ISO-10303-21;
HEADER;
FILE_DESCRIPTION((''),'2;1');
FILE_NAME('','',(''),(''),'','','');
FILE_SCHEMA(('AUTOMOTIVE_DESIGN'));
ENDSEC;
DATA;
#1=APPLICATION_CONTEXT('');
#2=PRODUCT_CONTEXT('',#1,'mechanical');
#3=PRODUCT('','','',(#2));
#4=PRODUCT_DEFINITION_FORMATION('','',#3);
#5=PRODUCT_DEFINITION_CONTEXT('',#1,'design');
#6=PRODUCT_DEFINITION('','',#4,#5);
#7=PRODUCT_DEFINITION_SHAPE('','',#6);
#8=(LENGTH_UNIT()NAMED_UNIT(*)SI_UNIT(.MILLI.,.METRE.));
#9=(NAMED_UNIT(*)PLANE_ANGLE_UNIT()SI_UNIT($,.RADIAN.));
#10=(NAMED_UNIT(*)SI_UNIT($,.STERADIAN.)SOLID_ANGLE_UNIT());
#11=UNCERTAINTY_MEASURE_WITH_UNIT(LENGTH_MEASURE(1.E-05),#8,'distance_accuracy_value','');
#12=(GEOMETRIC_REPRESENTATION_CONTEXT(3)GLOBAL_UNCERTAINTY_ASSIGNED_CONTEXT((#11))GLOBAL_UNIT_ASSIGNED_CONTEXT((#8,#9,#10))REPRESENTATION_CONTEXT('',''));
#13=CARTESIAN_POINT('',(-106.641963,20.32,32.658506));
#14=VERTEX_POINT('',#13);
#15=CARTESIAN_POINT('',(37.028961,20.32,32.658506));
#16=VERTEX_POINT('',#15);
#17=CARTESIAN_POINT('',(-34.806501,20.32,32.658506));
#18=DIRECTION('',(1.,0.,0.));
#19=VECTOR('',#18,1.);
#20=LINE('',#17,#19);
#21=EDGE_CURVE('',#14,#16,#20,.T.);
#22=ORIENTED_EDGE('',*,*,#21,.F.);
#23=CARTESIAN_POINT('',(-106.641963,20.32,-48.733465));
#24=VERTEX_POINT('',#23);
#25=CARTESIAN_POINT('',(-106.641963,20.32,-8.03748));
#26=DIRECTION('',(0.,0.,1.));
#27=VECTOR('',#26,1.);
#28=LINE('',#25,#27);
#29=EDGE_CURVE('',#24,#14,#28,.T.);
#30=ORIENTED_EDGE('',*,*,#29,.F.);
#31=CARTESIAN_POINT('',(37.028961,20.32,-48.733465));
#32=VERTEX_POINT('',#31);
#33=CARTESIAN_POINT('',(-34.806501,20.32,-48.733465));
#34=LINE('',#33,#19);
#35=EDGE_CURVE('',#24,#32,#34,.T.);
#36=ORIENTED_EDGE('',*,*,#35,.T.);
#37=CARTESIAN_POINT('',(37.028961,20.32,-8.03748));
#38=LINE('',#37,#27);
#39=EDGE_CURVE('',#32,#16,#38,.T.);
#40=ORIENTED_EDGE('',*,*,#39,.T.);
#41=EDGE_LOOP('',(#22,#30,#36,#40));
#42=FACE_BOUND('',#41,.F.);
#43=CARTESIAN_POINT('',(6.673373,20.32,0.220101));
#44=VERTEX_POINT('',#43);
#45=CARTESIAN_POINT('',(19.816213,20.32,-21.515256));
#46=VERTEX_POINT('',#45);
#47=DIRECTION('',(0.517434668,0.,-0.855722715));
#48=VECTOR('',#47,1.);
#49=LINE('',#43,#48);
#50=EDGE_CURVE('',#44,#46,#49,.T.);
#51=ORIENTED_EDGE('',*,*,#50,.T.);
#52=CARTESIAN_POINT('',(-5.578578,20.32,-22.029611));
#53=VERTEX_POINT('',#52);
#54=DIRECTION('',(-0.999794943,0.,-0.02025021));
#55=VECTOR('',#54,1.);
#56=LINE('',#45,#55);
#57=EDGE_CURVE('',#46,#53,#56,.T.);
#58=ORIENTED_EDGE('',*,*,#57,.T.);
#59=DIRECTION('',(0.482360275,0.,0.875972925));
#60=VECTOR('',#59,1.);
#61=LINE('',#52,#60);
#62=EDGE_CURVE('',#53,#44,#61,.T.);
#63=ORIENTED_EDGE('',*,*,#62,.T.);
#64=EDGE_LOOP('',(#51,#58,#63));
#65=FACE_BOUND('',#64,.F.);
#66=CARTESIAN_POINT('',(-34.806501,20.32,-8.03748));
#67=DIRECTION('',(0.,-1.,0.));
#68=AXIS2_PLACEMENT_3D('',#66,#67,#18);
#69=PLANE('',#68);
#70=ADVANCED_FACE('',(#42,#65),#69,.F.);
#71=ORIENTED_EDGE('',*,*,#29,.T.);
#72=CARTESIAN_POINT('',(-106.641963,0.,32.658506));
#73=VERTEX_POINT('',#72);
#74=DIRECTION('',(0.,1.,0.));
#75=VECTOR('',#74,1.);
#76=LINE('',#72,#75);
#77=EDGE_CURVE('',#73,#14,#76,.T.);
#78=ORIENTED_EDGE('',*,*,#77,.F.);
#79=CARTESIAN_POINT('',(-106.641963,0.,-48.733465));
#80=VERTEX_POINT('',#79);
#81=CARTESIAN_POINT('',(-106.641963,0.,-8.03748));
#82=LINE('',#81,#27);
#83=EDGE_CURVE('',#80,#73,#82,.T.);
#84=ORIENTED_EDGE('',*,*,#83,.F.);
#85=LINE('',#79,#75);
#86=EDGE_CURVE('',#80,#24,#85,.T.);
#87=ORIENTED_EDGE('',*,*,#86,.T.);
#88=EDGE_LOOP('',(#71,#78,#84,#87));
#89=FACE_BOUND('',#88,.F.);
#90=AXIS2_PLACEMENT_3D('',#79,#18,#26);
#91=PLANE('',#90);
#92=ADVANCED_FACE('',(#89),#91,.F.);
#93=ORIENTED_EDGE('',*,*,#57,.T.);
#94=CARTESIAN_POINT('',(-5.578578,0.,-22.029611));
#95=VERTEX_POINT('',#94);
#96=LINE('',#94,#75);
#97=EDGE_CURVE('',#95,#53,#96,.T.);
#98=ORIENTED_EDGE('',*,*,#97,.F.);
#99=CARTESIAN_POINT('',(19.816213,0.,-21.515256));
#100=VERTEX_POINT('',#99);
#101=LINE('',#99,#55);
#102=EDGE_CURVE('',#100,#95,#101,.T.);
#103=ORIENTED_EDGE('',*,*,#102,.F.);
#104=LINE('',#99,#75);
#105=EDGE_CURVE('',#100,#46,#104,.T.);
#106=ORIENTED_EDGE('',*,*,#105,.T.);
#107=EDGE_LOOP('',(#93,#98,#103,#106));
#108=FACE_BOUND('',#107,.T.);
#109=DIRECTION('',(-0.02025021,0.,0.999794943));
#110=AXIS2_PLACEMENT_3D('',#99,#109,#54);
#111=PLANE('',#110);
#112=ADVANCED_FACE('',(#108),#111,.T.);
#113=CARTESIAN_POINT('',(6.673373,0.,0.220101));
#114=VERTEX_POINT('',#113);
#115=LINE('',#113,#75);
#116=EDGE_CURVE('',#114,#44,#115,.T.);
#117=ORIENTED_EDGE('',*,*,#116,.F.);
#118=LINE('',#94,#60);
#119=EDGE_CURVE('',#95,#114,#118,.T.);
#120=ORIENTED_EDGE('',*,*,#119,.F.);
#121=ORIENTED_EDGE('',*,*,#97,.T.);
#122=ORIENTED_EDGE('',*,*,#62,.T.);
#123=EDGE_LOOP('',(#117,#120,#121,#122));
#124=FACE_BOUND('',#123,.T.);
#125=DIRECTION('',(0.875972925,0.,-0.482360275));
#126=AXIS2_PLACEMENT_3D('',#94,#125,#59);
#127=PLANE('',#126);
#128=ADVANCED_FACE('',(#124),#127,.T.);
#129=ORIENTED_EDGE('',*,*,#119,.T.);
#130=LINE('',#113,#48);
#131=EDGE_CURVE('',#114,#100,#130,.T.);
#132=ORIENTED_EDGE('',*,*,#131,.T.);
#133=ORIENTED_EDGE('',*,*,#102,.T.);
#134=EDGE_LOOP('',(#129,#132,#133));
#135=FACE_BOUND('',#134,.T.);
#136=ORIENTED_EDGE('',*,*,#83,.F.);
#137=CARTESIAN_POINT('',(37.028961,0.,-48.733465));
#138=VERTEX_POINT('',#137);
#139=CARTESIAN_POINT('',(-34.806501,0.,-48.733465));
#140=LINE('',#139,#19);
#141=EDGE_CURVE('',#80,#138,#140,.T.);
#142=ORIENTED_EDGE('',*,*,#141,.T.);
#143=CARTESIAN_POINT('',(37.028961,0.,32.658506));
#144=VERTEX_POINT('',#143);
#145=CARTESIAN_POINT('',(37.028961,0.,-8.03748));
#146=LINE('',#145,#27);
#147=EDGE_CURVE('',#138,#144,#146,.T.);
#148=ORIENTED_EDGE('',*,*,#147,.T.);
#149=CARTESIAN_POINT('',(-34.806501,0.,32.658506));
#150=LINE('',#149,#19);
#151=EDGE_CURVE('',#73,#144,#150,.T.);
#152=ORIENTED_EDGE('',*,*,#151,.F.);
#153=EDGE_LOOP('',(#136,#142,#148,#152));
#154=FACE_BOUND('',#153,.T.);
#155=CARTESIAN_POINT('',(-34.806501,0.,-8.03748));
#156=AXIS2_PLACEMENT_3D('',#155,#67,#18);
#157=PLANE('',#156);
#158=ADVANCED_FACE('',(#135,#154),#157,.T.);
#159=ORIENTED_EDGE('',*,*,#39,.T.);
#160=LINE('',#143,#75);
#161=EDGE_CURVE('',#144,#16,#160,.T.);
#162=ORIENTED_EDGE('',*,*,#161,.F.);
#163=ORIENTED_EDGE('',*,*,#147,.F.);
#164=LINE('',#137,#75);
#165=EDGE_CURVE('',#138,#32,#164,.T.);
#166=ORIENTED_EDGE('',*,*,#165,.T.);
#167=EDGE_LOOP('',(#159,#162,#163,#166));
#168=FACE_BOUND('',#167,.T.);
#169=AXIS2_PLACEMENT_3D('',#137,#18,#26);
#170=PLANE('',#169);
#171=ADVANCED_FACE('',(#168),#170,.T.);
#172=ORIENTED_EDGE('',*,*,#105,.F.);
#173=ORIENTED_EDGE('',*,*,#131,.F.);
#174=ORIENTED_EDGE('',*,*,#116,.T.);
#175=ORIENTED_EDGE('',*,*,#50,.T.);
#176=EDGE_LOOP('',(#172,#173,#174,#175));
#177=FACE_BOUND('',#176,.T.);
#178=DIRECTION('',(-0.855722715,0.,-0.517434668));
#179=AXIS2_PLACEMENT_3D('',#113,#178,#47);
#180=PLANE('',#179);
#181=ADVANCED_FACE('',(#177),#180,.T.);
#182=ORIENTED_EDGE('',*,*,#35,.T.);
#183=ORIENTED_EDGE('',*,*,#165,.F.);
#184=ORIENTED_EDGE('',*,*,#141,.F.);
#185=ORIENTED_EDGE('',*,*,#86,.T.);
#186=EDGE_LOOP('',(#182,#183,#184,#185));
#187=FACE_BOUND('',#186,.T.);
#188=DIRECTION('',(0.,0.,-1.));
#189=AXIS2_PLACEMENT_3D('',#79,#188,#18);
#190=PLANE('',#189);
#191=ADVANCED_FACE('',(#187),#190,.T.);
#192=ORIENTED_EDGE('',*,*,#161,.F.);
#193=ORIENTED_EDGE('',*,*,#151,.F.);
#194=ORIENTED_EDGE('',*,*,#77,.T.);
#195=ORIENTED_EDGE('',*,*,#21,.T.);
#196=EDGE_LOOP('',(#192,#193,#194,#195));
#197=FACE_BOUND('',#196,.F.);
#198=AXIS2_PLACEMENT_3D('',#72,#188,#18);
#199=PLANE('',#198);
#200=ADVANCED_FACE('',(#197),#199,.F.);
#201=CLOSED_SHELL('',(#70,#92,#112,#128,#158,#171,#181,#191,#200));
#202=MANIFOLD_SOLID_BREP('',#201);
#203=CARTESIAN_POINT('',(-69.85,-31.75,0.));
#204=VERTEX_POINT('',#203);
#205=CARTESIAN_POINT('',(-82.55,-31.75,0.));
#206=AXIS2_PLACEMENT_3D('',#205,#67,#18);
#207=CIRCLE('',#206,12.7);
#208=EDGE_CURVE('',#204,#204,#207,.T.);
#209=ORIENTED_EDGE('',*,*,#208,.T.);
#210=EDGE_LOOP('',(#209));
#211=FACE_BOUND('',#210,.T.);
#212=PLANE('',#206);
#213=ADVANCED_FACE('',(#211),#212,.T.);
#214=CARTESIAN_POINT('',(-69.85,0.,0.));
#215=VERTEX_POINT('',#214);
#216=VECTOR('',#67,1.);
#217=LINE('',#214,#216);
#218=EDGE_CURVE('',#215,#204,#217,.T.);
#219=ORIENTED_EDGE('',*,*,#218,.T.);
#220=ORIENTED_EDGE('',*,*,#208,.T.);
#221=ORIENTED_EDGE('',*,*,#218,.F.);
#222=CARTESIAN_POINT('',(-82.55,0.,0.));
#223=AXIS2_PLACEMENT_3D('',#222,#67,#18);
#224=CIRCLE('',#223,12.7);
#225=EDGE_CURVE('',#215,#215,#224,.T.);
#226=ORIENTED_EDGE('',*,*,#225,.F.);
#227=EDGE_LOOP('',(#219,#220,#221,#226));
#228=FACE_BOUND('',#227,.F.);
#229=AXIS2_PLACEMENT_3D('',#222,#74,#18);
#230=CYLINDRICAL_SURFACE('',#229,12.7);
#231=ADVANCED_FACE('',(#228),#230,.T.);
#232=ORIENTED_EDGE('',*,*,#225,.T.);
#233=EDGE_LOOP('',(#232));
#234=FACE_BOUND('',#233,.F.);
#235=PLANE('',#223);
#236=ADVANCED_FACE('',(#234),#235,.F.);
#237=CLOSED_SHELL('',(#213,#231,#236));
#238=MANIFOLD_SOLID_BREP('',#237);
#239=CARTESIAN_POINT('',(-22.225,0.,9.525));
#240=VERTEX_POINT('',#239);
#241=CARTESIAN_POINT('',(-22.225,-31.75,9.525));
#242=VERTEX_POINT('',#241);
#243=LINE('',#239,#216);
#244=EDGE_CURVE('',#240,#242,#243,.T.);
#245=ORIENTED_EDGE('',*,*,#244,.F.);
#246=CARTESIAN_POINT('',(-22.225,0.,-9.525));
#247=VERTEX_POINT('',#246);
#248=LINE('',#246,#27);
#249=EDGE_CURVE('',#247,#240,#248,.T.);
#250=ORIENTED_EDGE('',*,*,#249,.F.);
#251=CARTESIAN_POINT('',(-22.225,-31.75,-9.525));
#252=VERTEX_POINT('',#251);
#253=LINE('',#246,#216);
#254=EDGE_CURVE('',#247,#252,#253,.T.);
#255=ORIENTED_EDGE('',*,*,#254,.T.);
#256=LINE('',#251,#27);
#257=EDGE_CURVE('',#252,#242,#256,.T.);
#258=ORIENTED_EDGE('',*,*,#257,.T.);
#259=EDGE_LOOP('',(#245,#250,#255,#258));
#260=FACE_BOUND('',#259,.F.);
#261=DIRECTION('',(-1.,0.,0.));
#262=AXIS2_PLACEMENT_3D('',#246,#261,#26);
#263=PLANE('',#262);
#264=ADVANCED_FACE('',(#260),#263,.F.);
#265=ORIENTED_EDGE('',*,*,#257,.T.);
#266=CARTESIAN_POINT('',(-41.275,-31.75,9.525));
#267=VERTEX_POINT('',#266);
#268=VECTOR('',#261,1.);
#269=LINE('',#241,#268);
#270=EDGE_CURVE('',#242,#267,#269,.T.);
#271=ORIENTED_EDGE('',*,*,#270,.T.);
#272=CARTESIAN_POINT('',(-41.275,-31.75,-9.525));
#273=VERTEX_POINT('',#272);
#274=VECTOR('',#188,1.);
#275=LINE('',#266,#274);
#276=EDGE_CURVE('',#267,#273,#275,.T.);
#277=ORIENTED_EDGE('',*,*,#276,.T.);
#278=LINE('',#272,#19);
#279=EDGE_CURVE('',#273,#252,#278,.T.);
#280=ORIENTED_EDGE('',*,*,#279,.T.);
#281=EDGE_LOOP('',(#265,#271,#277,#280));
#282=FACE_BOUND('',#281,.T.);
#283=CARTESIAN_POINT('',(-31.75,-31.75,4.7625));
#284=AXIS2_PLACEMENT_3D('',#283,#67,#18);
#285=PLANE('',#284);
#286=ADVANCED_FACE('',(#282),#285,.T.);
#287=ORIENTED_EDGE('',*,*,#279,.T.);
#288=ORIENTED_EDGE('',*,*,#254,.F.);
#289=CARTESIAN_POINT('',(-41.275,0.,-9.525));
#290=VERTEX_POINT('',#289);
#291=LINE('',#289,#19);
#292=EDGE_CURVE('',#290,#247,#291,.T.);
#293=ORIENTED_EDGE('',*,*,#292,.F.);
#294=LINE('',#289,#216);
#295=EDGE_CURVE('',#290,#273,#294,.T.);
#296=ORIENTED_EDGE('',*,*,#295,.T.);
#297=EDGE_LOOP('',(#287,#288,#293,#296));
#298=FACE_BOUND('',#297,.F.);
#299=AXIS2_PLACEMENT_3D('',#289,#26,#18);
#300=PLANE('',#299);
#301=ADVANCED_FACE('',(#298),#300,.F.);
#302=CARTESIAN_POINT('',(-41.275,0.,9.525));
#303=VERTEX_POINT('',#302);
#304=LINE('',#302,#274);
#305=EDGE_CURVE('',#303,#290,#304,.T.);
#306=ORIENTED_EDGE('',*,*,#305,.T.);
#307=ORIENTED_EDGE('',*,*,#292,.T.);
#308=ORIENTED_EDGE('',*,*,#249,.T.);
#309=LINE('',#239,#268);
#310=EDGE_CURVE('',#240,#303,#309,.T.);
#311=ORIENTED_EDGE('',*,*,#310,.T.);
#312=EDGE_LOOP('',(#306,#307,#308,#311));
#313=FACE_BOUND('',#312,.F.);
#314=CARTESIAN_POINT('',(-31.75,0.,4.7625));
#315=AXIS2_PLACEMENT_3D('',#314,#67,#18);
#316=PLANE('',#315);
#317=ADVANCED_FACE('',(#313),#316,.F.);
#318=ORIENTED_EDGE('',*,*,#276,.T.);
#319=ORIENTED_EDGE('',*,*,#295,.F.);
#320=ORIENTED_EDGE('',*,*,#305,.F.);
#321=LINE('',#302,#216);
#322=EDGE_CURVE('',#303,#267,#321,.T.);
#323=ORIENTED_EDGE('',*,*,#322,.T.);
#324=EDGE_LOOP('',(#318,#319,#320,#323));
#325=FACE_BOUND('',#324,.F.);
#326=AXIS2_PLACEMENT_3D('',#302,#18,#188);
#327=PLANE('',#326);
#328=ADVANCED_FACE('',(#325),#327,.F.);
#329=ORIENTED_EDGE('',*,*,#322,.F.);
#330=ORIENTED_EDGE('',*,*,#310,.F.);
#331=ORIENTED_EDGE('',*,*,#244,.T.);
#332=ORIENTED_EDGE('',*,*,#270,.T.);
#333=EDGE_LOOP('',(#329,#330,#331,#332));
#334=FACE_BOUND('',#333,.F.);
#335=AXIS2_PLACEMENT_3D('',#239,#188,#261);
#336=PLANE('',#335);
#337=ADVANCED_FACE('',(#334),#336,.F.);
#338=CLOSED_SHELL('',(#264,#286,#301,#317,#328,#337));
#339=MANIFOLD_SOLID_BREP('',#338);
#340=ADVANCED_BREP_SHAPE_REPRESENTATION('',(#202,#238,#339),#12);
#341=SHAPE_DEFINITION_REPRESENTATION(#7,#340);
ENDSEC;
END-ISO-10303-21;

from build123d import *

# Parameters (mm, degrees)
F0_R     = 12.7
F1_DEPTH = 31.75
F0_W     = 143.6709240079
F0_H     = 81.3919715583
F2_DEPTH = 20.32


# Not quite as in the source:
# - a feature names something its author has since deleted; it is built from what else it names


with BuildPart() as f1:
    # F0 (on Front) → F1 (new body)
    with BuildSketch(Plane.XZ):
        with Locations((-82.55, 0)):
            Circle(F0_R)
    extrude(amount=F1_DEPTH)


with BuildPart() as f1b:
    # F0 (on Front) → F1, piece 2 (new body)
    with BuildSketch(Plane.XZ):
        Polygon((-31.75, 0), (-22.225, 0), (-22.225, 9.525), (-41.275, 9.525), (-41.275, 0), align=None)
        Polygon((-22.225, -9.525), (-22.225, 0), (-31.75, 0), (-41.275, 0), (-41.275, -9.525), align=None)
    extrude(amount=F1_DEPTH)


with BuildPart() as f2:
    # F0 (on Front) → F2 (new body)
    with BuildSketch(Plane.XZ):
        with Locations((-34.8065011203, -8.0374795943)):
            Rectangle(F0_W, F0_H)
        Polygon((-5.5785784244, -22.0296108979), (6.6733725689, 0.2201013892), (19.8162131398, -21.5152555605), align=None, mode=Mode.SUBTRACT)
        with Locations((-82.55, 0)):
            Circle(F0_R, mode=Mode.SUBTRACT)
        Polygon((-22.225, 9.525), (-22.225, 0), (-22.225, -9.525), (-41.275, -9.525), (-41.275, 0), (-41.275, 9.525), align=None, mode=Mode.SUBTRACT)
        with Locations((-82.55, 0)):
            Circle(F0_R)
        Polygon((-22.225, -9.525), (-22.225, 0), (-31.75, 0), (-41.275, 0), (-41.275, -9.525), align=None)
        Polygon((-31.75, 0), (-22.225, 0), (-22.225, 9.525), (-41.275, 9.525), (-41.275, 0), align=None)
    extrude(amount=-F2_DEPTH)


solid = Compound([f1.part, f1b.part, f2.part])
